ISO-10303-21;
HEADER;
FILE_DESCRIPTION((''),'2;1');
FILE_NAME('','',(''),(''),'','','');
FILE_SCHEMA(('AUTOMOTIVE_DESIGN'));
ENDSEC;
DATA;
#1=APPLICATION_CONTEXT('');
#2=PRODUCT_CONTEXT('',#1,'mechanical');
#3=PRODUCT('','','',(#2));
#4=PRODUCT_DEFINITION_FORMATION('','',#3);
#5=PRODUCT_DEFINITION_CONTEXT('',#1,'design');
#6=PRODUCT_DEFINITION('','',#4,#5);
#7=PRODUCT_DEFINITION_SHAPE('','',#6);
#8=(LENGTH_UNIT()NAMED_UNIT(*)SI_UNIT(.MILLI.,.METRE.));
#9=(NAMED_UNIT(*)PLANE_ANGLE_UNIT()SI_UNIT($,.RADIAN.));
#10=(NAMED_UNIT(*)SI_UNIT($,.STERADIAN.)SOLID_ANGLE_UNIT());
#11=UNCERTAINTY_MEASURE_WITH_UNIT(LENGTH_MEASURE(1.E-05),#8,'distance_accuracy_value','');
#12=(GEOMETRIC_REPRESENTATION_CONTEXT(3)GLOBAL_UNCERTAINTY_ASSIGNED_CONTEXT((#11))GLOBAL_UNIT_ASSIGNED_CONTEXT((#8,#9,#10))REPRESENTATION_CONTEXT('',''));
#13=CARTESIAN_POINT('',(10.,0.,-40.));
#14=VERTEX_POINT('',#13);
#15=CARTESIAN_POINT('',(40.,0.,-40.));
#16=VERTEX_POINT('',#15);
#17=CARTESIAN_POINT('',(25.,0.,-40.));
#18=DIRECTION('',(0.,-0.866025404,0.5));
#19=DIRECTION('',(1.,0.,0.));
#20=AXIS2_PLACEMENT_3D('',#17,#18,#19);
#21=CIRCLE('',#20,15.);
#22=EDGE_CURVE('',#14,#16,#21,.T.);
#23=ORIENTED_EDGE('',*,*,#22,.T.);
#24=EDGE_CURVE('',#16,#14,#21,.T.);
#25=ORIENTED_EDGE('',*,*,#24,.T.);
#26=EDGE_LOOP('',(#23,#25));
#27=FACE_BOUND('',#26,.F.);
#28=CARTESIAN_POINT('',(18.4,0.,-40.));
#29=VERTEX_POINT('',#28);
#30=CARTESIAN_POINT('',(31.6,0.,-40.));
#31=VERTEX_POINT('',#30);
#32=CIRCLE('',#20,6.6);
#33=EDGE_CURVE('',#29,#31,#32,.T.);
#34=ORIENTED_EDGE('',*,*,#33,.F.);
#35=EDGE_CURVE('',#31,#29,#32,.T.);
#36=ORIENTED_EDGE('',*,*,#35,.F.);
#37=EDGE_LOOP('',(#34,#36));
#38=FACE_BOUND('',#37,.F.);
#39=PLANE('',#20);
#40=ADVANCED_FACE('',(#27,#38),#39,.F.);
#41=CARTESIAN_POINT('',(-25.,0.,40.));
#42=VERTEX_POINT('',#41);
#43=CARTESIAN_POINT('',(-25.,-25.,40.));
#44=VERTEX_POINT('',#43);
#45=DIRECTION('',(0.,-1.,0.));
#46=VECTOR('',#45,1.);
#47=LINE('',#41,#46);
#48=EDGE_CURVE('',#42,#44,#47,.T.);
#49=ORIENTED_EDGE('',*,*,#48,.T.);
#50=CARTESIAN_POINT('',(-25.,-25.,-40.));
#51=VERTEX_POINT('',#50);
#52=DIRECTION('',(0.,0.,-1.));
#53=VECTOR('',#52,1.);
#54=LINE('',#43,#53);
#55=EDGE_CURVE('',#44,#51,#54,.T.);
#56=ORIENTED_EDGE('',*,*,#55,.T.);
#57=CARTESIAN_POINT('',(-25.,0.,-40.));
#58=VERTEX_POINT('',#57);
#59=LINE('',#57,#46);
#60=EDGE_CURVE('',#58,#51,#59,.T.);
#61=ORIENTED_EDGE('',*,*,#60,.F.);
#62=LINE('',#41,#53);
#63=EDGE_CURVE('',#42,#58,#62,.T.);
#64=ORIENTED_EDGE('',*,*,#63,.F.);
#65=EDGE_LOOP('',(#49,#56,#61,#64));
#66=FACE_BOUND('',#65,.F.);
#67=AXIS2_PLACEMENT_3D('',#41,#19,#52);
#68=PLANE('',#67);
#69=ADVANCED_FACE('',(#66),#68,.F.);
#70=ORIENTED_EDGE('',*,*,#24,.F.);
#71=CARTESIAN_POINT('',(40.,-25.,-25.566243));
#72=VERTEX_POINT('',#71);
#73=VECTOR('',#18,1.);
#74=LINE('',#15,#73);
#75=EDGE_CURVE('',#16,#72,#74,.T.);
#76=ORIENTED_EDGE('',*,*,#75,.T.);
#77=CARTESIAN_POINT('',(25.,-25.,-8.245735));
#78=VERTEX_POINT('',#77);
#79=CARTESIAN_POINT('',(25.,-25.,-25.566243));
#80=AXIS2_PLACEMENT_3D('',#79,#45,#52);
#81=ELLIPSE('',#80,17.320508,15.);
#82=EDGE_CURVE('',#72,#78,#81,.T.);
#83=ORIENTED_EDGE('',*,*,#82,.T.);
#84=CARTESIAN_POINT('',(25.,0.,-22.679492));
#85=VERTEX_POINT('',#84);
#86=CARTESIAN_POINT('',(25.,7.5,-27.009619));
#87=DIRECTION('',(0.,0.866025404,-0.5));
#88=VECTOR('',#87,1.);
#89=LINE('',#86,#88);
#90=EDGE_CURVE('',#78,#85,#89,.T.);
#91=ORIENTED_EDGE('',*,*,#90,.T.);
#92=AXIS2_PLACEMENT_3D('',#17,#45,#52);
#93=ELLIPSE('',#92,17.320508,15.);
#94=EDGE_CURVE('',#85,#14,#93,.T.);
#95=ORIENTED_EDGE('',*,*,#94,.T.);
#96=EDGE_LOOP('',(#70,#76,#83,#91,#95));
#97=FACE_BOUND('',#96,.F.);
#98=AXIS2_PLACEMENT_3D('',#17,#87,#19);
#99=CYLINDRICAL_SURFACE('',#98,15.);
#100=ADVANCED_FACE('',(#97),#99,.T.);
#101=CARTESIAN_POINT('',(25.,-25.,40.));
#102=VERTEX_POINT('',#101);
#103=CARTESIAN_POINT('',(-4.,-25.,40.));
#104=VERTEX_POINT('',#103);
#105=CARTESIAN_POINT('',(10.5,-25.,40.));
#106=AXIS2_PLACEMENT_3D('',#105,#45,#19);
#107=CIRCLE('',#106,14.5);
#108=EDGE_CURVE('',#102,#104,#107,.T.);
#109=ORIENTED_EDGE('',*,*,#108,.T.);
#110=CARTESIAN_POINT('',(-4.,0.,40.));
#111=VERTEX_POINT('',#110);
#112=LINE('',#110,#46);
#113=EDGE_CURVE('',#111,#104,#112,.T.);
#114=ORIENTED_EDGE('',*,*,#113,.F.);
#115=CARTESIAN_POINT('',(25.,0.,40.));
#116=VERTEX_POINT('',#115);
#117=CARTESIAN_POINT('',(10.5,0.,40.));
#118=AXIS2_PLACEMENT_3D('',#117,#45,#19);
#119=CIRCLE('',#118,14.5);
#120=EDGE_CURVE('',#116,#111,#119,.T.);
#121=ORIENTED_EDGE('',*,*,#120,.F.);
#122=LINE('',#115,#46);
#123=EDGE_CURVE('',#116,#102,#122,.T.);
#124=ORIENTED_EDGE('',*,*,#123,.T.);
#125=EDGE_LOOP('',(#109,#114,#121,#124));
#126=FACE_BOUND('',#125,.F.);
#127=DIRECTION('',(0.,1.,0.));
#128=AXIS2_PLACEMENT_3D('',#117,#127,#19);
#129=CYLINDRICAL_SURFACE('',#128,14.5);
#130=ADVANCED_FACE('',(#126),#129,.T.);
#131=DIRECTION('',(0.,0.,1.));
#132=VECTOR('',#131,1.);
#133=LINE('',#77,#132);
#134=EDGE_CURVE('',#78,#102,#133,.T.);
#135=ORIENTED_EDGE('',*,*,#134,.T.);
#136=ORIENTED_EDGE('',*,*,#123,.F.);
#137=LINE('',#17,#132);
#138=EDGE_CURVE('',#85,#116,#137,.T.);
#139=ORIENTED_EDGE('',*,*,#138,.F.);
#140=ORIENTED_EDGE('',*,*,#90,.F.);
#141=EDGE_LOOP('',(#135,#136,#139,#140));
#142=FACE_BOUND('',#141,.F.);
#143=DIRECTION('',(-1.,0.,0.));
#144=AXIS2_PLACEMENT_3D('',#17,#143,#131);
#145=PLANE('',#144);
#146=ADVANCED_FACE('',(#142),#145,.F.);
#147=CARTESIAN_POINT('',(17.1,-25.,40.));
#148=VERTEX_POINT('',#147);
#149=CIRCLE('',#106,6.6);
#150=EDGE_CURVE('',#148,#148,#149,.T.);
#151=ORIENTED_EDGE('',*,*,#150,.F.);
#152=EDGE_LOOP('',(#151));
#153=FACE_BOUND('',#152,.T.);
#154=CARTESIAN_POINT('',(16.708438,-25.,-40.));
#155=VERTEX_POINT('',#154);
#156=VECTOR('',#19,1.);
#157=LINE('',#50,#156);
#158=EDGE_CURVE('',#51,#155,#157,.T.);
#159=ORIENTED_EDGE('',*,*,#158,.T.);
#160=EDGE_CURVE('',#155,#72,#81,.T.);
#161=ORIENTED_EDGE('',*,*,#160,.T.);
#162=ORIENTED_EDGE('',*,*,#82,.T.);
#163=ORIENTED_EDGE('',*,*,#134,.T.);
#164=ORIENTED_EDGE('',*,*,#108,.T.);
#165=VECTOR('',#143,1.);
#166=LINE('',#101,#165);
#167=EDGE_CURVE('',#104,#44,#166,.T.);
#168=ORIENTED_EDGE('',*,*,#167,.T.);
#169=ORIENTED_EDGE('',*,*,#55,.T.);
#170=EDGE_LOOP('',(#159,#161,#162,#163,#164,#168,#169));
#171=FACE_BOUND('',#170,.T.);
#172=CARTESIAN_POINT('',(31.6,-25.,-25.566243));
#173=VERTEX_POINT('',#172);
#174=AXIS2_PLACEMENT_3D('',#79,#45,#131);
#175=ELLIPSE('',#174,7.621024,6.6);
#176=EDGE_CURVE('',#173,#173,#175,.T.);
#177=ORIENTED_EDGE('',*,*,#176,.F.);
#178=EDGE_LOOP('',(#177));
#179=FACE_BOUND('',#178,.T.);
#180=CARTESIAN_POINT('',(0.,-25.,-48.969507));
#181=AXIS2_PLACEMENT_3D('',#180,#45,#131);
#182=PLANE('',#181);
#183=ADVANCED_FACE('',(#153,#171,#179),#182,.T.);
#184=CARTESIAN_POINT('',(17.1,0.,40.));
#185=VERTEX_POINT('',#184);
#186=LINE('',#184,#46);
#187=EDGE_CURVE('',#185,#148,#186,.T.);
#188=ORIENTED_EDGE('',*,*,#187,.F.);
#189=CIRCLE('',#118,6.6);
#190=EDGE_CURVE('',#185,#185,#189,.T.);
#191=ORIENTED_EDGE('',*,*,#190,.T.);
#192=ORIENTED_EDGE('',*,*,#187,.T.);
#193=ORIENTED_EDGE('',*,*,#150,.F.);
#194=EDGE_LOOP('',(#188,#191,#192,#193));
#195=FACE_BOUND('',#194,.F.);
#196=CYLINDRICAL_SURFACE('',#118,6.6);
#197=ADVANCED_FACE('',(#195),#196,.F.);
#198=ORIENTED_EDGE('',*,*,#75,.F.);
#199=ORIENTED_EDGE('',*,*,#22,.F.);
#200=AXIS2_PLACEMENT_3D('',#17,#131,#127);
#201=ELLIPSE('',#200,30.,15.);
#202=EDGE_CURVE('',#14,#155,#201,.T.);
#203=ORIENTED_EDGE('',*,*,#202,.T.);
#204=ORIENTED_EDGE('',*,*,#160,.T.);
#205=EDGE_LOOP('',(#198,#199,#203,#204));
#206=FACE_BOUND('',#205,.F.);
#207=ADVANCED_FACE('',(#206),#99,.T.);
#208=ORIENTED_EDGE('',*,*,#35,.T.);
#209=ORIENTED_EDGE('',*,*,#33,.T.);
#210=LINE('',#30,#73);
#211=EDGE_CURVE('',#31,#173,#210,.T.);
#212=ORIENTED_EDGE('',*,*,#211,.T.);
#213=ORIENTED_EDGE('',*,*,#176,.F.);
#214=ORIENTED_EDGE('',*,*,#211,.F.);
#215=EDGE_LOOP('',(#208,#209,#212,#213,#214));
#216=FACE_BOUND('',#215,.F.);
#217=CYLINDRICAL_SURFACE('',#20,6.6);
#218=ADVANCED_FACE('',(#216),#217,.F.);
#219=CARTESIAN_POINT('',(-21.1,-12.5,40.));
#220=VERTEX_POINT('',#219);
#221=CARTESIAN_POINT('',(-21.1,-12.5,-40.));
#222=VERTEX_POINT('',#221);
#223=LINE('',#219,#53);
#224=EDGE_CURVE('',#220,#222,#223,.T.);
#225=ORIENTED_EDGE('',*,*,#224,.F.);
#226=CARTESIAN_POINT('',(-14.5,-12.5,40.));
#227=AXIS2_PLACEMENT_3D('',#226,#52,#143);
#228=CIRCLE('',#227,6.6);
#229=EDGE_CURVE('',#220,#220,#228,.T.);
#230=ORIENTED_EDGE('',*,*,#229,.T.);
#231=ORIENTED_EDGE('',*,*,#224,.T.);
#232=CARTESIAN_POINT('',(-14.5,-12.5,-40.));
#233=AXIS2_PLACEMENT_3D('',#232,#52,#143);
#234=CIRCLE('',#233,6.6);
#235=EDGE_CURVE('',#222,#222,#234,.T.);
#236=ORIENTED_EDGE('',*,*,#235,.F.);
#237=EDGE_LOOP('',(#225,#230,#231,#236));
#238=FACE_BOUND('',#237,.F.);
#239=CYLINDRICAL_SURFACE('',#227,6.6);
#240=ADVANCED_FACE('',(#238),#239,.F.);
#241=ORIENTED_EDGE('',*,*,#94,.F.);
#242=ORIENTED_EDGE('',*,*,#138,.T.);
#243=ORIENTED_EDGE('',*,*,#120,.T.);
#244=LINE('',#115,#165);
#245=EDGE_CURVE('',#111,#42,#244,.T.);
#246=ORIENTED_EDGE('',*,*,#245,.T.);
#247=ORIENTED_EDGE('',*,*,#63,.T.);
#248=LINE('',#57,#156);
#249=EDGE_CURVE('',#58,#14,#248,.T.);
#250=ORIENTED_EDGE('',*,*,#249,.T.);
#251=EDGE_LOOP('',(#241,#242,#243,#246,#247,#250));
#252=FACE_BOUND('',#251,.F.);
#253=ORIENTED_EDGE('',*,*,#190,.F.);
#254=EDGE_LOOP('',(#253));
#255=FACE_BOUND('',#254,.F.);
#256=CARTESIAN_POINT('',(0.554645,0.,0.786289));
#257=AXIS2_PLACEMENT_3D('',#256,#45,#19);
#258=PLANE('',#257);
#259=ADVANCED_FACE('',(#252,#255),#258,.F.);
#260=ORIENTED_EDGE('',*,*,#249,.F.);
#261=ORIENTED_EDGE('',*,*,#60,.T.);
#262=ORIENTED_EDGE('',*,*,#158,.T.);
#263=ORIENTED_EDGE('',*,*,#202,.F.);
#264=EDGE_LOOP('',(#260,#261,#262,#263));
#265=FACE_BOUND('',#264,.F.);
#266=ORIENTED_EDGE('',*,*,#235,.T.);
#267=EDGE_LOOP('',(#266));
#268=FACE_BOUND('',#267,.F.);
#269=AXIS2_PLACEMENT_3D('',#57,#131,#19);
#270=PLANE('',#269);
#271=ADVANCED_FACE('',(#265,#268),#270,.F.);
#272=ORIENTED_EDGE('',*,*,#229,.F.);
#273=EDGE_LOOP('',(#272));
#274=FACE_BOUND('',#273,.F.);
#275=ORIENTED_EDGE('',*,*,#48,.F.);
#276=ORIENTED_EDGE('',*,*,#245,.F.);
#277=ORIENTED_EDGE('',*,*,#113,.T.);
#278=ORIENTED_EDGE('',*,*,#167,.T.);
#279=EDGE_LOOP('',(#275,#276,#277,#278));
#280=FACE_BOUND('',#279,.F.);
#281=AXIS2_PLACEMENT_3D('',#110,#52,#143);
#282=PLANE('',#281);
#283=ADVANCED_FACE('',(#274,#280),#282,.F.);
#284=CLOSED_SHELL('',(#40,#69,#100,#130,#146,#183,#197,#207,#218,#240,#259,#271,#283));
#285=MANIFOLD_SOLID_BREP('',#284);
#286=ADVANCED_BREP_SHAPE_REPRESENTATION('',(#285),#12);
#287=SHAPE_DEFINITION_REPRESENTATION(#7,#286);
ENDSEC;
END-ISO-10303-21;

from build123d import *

# Parameters (mm, degrees)
F1_DEPTH        = 25
F3_R            = 15
F4_DEPTH        = 52
F6_D            = 13.2
F6_CBORE_D      = 19.25
F6_CBORE_DEPTH  = 0
F8_D            = 13.2
F8_CBORE_D      = 19.25
F8_CBORE_DEPTH  = 0
F10_D           = 13.2
F10_CBORE_D     = 19.25
F10_CBORE_DEPTH = 0
F11_W           = 35.8968544751
F11_H           = 52.9583077878
F12_DEPTH       = 58


with BuildPart() as f1:
    # F0 (on Front) → F1 (new body)
    with BuildSketch(Plane.XZ):
        with BuildLine():
            Line((-25, -40), (25, -40))
            Line((25, -40), (25, 40))
            ThreePointArc((25, 40), (10.5, 25.5), (-4, 40))
            Line((-4, 40), (-25, 40))
            Line((-25, 40), (-25, -40))
        make_face()
        with BuildLine():
            ThreePointArc((-4, 40), (10.5, 25.5), (25, 40))
            Line((25, 40), (-4, 40))
        make_face()
        with BuildLine():
            Line((-4, 40), (25, 40))
            ThreePointArc((25, 40), (10.5, 54.5), (-4, 40))
        make_face()
    extrude(amount=F1_DEPTH)

    # F3 (on face) → F4 (join)
    with BuildSketch(Plane(origin=(0, 17.3205080757, -10), x_dir=(1, 0, 0), z_dir=(0, -0.8660254038, 0.5))):
        with Locations((25, -34.6410161514)):
            Circle(F3_R)
    extrude(amount=F4_DEPTH)

    # F6 (through all)
    with Locations(Plane(origin=(0, 17.3205080757, -10), x_dir=(-1, 0, 0), z_dir=(0, 0.8660254038, -0.5))):
        with Locations((-25, -34.6410161514)):
            CounterBoreHole(F6_D / 2, F6_CBORE_D / 2, F6_CBORE_DEPTH)

    # F8 (through all)
    with Locations(Plane(origin=(0, 0, 0), x_dir=(-1, 0, 0), z_dir=(0, 1, 0))):
        with Locations((-10.5, 40)):
            CounterBoreHole(F8_D / 2, F8_CBORE_D / 2, F8_CBORE_DEPTH)

    # F10 (through all)
    with Locations(Plane.XY.offset(40)):
        with Locations((-14.5, -12.5)):
            CounterBoreHole(F10_D / 2, F10_CBORE_D / 2, F10_CBORE_DEPTH)

    # F11 (on Right) → F12 (cut)
    with BuildSketch(Plane.YZ):
        with Locations((-42.9484272376, -22.4903533235)):
            Rectangle(F11_W, F11_H)
    extrude(amount=F12_DEPTH, mode=Mode.SUBTRACT)


solid = f1.part
